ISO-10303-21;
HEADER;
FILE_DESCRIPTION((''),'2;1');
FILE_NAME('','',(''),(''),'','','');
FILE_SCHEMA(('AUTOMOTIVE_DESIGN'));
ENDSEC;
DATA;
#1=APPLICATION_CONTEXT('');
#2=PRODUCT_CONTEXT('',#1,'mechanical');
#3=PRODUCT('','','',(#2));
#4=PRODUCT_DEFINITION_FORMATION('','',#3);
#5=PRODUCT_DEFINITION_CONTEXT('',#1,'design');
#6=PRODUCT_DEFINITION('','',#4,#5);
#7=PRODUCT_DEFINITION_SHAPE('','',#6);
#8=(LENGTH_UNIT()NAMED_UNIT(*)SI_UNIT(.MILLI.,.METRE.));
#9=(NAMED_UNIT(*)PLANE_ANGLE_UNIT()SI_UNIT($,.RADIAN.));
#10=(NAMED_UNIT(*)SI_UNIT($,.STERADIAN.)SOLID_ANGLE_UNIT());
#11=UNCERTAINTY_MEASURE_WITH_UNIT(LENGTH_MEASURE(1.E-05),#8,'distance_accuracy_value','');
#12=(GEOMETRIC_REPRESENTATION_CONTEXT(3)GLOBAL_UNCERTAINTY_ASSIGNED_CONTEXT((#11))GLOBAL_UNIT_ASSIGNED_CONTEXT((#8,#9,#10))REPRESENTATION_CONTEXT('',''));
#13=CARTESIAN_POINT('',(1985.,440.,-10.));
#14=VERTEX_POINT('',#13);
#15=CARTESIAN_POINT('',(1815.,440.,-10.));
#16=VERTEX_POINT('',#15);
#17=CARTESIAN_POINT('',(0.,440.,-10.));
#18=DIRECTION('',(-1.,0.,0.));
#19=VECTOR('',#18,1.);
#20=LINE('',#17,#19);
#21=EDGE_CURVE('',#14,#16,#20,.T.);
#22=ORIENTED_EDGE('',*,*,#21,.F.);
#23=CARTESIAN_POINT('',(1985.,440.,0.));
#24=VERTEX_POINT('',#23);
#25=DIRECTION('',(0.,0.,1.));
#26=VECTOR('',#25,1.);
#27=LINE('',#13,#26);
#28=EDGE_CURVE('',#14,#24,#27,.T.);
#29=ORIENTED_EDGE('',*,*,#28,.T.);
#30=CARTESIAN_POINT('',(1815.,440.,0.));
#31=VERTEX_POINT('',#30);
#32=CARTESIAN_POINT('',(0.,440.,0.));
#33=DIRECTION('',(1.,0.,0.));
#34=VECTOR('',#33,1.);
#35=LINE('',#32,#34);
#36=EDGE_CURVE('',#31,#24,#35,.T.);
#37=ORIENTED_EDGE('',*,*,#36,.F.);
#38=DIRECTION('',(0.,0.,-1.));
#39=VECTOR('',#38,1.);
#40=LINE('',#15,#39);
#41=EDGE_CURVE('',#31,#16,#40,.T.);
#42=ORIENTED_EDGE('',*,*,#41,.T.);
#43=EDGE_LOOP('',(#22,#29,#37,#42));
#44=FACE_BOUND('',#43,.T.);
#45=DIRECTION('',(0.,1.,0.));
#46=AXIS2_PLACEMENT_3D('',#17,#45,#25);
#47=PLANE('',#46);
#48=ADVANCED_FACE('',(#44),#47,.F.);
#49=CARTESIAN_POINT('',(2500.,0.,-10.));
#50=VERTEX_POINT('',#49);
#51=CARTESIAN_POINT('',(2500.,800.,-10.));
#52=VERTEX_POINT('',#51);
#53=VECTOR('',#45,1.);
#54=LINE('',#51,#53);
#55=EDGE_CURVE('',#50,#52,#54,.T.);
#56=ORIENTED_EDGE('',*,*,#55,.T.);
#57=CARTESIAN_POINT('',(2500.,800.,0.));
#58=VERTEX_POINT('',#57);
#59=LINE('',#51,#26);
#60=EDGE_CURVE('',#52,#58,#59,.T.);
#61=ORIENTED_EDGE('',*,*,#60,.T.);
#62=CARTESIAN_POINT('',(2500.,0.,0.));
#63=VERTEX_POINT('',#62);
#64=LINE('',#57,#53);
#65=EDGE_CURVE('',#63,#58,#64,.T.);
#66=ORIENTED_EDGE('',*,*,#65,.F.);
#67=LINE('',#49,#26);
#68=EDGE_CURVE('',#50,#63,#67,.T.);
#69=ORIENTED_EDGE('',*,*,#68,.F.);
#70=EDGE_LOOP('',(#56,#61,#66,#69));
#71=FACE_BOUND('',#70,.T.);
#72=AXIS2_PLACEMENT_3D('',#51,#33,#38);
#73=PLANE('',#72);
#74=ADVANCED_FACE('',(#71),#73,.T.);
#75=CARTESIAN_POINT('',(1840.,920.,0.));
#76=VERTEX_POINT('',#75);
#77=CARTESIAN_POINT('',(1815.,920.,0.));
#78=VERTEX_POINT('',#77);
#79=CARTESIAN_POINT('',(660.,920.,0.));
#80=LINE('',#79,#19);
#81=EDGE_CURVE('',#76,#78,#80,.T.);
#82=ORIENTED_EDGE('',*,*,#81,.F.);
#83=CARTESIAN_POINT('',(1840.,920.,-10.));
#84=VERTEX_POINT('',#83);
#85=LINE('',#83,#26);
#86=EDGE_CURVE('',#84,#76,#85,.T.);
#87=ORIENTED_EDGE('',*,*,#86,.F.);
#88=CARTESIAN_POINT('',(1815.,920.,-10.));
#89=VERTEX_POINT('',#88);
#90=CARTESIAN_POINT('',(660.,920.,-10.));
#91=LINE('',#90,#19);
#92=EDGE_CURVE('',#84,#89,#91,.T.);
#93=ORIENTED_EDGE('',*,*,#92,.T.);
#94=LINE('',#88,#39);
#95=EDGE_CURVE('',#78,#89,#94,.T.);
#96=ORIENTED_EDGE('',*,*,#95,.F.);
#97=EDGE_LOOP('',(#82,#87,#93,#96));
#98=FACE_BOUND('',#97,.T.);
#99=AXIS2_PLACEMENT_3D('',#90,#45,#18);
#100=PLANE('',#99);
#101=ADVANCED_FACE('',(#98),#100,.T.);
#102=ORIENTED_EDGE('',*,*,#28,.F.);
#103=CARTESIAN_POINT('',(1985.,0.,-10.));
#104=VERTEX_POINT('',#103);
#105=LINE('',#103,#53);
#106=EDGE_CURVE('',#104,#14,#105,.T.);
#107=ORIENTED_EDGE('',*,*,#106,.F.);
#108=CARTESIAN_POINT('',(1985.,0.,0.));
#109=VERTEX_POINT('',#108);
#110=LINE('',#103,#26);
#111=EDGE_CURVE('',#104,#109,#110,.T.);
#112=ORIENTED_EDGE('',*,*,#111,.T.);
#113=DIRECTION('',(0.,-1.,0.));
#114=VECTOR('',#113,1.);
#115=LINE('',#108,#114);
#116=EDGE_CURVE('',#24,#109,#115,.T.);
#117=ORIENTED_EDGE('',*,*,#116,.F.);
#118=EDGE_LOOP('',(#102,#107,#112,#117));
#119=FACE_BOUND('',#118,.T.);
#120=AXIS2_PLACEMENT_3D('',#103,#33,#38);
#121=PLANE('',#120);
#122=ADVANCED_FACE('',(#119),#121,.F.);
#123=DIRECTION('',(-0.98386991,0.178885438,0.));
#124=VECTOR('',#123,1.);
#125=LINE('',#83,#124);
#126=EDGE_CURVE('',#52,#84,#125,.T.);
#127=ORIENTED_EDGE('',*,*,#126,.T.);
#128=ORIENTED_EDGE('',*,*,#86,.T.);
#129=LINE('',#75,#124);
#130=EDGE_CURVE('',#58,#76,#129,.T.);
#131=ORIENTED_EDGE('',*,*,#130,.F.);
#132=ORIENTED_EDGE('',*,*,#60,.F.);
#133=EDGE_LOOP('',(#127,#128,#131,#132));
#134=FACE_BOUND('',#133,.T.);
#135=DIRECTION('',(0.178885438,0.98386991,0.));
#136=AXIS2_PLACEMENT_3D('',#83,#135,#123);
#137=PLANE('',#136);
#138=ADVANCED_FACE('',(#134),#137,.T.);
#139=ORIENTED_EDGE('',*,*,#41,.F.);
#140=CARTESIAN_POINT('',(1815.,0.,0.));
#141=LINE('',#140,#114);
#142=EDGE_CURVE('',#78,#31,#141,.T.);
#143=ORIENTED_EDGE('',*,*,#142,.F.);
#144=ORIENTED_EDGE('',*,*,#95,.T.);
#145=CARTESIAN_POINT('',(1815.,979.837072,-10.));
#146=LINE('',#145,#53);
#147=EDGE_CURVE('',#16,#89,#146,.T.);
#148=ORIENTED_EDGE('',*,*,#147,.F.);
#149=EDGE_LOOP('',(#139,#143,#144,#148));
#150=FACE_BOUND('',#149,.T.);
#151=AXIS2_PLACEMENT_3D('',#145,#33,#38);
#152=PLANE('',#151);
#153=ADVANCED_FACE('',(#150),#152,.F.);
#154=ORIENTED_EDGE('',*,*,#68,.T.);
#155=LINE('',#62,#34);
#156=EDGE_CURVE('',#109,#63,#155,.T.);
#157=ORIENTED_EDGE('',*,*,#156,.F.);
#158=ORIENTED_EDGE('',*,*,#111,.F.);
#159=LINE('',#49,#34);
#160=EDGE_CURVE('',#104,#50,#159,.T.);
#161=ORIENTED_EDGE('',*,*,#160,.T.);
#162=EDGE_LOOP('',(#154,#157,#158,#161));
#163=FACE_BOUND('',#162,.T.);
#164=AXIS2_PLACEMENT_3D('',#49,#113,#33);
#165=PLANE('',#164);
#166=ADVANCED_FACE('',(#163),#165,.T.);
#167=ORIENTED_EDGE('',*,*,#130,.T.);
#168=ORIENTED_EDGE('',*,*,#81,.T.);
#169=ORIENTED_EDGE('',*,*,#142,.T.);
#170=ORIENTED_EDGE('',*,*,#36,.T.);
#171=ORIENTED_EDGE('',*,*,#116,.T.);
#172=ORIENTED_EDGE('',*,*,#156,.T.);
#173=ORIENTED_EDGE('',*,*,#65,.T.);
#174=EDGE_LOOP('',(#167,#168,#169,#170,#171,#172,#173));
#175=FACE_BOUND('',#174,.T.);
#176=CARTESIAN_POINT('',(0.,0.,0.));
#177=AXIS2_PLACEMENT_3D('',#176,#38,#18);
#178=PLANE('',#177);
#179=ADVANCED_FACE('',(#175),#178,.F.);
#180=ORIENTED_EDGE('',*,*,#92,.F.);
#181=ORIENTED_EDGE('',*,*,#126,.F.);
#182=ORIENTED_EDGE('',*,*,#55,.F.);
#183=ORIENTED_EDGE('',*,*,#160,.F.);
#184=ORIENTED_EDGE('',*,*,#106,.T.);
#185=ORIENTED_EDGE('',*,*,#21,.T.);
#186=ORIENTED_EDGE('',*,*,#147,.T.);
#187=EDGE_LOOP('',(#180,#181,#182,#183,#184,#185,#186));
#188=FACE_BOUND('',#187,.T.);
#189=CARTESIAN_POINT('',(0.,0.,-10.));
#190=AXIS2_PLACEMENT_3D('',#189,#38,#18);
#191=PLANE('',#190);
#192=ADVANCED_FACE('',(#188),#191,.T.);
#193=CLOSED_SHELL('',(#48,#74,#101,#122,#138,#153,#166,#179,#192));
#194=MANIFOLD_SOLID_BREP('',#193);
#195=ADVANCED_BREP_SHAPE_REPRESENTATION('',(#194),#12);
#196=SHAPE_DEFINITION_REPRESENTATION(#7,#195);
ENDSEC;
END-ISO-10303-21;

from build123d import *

# Parameters (mm, degrees)
TABAN_FLAN_1_DEPTH         = 10
KES_EKSTR_ZYON1_DEPTH      = 2664.925674639
KES_EKSTR_ZYON1_DEPTH_BACK = 2664.925674639
IZIM2_W                    = 1985
IZIM2_H                    = 440
KES_EKSTR_ZYON2_DEPTH      = 2664.925674639
KES_EKSTR_ZYON2_DEPTH_BACK = 2664.925674639
IZIM4_W                    = 2142.353076874
IZIM4_H                    = 1059.200267334
KES_EKSTR_ZYON3_DEPTH      = 2664.925674639
KES_EKSTR_ZYON3_DEPTH_BACK = 2664.925674639
IZIM5_W                    = 190.659324766
IZIM5_H                    = 598.86582779


# Sheet-metal steps are written as plain solids
with BuildPart() as part:
    # Çizim1 → Taban-Flanş1 (new body)
    with BuildSketch(Plane.XY):
        Polygon((0, 0), (0, 800), (660, 920), (1840, 920), (2500, 800), (2500, 0), align=None)
    extrude(amount=-TABAN_FLAN_1_DEPTH)

    # Çizim2 → Kes-Ekstrüzyon1 (cut, two sides: drawn at the far end of the back side and taken through both)
    with BuildSketch(Plane.XY.offset(-KES_EKSTR_ZYON1_DEPTH_BACK)):
        with Locations((992.5, 220)):
            Rectangle(IZIM2_W, IZIM2_H)
    extrude(amount=KES_EKSTR_ZYON1_DEPTH + KES_EKSTR_ZYON1_DEPTH_BACK, mode=Mode.SUBTRACT)

    # Çizim4 → Kes-Ekstrüzyon2 (cut, two sides: drawn at the far end of the back side and taken through both)
    with BuildSketch(Plane.XY.offset(-KES_EKSTR_ZYON2_DEPTH_BACK)):
        with Locations((741.823461563, 774.473780937)):
            Rectangle(IZIM4_W, IZIM4_H)
    extrude(amount=KES_EKSTR_ZYON2_DEPTH + KES_EKSTR_ZYON2_DEPTH_BACK, mode=Mode.SUBTRACT)

    # Çizim5 → Kes-Ekstrüzyon3 (cut, two sides: drawn at the far end of the back side and taken through both)
    with BuildSketch(Plane.XY.offset(-KES_EKSTR_ZYON3_DEPTH_BACK)):
        with Locations((1719.670337617, 680.404157963)):
            Rectangle(IZIM5_W, IZIM5_H)
    extrude(amount=KES_EKSTR_ZYON3_DEPTH + KES_EKSTR_ZYON3_DEPTH_BACK, mode=Mode.SUBTRACT)


solid = part.part
